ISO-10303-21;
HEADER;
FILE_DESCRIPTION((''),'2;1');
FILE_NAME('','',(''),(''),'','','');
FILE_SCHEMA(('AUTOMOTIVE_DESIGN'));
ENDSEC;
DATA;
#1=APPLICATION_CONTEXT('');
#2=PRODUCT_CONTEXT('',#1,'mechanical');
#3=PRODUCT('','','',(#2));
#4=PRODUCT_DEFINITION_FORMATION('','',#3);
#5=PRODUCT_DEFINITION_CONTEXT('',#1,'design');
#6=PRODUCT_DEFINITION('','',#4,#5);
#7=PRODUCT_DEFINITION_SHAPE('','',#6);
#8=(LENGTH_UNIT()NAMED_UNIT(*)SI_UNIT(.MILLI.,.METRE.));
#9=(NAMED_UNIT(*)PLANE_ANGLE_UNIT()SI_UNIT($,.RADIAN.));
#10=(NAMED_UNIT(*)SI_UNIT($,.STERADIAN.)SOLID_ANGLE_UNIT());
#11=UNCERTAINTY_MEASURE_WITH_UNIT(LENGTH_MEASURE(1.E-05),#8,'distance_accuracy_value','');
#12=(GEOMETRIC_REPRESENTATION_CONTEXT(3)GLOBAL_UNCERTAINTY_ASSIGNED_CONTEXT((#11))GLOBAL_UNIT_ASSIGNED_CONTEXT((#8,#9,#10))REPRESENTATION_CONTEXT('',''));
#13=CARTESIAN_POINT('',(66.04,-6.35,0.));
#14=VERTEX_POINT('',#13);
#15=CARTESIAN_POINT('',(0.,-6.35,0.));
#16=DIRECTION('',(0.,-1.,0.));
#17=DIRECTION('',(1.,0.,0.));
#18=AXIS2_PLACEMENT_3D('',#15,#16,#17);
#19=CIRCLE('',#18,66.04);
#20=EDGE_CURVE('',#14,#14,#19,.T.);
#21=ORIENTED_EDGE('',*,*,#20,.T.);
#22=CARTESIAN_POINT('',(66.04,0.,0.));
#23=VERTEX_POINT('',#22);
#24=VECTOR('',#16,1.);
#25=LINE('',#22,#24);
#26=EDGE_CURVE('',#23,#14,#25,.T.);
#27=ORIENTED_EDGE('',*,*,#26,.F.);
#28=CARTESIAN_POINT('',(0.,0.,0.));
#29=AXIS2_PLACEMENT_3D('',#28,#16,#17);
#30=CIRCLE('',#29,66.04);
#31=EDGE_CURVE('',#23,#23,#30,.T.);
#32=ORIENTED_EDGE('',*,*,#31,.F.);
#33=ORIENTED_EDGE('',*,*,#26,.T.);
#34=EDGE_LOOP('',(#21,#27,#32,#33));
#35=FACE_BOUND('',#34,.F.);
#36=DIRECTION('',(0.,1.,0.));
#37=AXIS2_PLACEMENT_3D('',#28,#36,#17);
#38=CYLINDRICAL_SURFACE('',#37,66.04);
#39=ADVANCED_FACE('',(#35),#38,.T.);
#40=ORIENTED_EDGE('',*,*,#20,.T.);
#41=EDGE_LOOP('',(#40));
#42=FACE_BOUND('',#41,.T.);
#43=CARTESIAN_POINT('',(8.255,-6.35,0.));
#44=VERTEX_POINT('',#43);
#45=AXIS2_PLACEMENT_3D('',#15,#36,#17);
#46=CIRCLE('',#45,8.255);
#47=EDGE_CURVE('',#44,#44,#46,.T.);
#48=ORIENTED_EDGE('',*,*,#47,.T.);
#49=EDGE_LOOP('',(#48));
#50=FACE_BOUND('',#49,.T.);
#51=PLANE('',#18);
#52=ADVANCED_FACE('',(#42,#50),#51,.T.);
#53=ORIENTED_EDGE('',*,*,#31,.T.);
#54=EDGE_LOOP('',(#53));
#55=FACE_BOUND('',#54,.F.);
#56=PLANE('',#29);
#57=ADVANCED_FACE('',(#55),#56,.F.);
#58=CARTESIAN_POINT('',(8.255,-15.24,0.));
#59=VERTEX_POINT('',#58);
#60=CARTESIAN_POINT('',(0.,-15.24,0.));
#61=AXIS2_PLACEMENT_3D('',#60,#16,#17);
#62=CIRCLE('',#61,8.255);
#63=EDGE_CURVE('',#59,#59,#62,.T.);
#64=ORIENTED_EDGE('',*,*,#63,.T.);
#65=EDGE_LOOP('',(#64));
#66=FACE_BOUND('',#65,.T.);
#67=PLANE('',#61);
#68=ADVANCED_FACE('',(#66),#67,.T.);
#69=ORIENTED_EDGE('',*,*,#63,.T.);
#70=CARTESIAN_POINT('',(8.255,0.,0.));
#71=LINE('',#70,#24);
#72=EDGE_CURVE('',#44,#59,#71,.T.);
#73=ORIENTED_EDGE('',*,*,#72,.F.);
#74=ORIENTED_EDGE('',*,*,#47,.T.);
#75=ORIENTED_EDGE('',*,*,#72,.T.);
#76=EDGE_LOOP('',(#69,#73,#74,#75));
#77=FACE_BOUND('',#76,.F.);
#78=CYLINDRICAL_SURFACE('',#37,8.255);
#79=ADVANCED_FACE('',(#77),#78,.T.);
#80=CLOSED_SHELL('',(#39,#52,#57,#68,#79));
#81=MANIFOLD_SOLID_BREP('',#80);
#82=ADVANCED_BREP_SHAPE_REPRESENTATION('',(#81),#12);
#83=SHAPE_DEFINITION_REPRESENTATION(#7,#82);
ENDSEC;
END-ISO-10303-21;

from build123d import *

# Parameters (mm, degrees)
F0_R     = 66.04
F1_DEPTH = 6.35
F2_R     = 8.255
F3_DEPTH = 15.24


# Not quite as in the source:
# - a feature names something its author has since deleted; it is built from what else it names


with BuildPart() as f1:
    # F0 (on Front) → F1 (new body)
    with BuildSketch(Plane.XZ):
        Circle(F0_R)
    extrude(amount=F1_DEPTH)

    # F2 (on Front) → F3 (join)
    with BuildSketch(Plane.XZ):
        Circle(F2_R)
    extrude(amount=F3_DEPTH)


solid = f1.part
